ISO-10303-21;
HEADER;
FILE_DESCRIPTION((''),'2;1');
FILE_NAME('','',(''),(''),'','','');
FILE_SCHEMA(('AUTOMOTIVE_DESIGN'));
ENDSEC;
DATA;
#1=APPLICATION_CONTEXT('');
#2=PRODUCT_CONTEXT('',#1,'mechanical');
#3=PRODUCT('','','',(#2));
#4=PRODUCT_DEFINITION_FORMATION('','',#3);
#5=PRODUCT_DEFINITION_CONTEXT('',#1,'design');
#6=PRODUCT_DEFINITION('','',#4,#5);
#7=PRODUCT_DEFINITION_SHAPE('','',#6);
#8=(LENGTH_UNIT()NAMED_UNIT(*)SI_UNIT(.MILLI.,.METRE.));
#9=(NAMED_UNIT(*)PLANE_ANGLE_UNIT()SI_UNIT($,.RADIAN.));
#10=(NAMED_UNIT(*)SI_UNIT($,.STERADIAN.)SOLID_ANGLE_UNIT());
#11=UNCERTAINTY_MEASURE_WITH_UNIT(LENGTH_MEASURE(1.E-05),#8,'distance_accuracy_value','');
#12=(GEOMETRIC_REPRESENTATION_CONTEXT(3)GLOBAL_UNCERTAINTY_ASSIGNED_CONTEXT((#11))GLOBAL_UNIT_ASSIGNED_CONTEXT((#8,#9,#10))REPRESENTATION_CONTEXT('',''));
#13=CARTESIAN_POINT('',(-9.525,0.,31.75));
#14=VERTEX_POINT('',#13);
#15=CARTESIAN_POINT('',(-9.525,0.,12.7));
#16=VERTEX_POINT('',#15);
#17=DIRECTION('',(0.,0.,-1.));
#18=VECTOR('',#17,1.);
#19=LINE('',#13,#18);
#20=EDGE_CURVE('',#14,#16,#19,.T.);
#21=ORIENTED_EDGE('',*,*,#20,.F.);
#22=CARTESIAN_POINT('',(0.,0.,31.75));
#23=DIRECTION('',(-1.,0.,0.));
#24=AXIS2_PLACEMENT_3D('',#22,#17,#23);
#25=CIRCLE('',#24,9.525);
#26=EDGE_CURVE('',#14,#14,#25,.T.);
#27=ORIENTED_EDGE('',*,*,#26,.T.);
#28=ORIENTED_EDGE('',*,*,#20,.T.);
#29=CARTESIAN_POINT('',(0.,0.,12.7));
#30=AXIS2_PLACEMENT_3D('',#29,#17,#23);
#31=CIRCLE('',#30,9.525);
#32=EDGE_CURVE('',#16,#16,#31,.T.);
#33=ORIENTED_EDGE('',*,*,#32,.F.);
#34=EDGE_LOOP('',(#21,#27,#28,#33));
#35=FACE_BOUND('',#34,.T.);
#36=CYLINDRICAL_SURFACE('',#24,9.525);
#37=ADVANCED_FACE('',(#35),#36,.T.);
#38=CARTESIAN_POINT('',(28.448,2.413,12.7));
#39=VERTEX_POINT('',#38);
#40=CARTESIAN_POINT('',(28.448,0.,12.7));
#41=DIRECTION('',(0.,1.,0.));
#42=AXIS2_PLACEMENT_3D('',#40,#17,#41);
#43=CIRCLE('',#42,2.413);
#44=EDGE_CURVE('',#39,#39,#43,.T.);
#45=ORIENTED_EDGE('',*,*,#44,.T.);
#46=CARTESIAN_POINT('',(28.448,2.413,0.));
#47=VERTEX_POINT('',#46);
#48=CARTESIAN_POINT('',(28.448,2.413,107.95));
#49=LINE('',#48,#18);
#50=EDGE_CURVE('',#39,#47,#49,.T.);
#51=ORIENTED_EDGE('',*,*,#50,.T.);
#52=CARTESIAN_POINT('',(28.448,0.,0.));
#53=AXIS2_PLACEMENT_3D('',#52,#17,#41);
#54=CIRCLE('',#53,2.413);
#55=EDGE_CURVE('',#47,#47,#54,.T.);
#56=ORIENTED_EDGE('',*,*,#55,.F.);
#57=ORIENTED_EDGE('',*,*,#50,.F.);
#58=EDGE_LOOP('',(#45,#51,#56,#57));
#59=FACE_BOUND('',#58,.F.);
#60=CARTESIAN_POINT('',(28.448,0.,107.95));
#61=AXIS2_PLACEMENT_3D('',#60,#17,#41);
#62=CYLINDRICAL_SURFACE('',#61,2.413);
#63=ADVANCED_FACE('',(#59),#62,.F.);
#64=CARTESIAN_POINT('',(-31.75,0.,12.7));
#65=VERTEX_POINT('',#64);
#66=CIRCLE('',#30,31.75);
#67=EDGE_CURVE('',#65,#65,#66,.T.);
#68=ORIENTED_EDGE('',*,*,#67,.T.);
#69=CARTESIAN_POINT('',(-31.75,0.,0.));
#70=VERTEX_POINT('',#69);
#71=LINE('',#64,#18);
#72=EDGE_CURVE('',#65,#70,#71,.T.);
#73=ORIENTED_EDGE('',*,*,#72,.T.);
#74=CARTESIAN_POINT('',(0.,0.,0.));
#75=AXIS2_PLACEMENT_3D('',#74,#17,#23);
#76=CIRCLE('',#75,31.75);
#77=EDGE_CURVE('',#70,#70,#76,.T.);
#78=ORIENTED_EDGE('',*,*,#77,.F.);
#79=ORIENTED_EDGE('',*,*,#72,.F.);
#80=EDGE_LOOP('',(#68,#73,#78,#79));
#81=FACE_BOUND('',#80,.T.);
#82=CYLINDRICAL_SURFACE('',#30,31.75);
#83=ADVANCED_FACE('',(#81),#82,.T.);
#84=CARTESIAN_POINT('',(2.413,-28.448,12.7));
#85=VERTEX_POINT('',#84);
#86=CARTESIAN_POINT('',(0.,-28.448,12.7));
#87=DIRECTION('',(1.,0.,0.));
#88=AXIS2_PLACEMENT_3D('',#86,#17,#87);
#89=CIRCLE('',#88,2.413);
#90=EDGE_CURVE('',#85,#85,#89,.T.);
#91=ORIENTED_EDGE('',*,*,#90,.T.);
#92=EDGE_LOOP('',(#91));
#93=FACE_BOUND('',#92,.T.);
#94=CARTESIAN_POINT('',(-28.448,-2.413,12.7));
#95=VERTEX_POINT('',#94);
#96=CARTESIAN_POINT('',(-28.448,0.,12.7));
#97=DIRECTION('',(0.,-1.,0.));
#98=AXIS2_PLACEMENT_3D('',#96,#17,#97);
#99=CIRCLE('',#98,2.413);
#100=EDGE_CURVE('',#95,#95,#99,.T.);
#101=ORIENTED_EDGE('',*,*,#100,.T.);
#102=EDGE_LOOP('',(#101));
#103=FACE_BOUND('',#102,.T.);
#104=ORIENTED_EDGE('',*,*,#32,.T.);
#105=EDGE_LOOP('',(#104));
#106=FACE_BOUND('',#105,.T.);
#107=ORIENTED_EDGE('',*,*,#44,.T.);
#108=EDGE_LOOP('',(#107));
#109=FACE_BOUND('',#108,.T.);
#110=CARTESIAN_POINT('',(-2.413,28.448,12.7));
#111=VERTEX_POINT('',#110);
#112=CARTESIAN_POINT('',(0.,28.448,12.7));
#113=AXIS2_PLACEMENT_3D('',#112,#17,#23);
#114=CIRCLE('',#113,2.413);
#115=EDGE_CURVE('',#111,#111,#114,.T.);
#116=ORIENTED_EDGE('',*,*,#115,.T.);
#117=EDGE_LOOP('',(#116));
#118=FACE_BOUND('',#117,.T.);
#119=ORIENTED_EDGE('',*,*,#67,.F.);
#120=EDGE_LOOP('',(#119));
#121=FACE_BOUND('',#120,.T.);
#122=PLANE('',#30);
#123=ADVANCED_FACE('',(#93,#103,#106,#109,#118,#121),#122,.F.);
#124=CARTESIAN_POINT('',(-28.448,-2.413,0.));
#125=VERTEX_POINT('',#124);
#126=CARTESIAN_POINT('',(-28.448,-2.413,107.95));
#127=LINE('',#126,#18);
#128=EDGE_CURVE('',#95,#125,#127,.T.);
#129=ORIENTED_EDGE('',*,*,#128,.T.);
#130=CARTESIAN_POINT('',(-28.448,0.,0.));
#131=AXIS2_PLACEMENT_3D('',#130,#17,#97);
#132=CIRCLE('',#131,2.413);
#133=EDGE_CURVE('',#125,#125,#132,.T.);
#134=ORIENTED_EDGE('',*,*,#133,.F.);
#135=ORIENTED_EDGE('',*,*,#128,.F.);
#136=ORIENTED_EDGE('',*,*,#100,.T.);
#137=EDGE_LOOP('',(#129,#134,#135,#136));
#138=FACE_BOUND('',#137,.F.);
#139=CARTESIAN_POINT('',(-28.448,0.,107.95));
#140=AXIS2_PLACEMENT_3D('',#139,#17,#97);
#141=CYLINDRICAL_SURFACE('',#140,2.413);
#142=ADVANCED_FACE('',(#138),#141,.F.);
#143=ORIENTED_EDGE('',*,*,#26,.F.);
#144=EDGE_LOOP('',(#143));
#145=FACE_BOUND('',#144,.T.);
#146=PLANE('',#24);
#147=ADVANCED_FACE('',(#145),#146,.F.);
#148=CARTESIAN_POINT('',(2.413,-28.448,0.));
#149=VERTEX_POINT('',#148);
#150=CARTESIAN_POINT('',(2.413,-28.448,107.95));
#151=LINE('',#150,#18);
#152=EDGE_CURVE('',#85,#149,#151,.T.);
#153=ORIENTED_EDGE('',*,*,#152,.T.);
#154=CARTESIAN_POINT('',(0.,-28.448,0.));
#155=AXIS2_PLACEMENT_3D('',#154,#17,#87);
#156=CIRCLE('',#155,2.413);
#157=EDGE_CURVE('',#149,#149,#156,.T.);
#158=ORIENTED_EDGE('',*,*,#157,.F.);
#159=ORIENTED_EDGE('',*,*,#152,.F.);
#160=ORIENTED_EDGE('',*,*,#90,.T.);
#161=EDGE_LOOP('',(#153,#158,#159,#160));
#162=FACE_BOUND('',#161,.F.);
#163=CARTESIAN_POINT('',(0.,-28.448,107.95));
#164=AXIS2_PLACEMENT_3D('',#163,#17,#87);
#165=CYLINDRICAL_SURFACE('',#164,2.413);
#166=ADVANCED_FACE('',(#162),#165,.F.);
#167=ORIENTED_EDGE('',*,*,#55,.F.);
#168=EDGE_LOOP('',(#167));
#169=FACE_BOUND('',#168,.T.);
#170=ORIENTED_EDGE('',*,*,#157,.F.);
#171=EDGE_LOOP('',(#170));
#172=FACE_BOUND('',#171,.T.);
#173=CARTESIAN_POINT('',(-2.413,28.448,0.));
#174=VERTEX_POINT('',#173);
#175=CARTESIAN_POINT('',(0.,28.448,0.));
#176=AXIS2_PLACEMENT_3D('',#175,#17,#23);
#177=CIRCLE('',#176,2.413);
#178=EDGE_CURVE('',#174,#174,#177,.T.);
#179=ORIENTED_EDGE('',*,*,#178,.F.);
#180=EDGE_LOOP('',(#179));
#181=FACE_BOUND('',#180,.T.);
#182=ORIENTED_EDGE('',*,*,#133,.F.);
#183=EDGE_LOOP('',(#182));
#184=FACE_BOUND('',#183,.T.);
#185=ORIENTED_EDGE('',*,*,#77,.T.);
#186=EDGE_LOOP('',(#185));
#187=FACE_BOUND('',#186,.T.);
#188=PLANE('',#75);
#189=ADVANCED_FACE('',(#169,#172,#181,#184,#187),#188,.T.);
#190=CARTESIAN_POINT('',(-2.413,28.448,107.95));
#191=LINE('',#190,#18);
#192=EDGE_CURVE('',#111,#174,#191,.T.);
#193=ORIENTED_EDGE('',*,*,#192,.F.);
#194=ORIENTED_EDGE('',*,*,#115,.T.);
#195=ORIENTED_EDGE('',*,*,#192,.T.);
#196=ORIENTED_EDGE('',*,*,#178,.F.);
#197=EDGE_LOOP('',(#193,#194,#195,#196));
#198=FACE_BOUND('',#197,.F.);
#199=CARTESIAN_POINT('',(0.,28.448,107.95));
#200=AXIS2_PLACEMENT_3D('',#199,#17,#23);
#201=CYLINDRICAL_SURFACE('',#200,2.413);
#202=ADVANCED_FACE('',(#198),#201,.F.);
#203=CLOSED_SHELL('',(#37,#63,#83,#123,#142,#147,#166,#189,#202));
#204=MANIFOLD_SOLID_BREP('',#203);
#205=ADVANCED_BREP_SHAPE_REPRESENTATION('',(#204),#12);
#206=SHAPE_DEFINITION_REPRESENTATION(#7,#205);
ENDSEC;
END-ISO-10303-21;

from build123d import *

# Parameters (mm, degrees)
F3_D            = 4.826
F3_COPIES_COUNT = 4


# Not quite as in the source:
# - a pattern or mirror of a feature is missing from the dataset's text; its kind, count and spacing are read off the source's solid


with BuildPart() as f1:
    # F0 (on Front) → F1 (revolve)
    with BuildSketch(Plane.XZ):
        Polygon((-31.75, 0), (0, 0), (0, 31.75), (-9.525, 31.75), (-9.525, 12.7), (-31.75, 12.7), align=None)
    revolve(axis=Axis((0, 0, 15.875), (0, 0, -1)))

    # F3 (through all)
    with Locations(Plane.XY.offset(12.7)):
        with Locations((0, 28.448)):
            f3 = Hole(F3_D / 2)

    # F3_copies: F3 ×4 about axis
    f3_copies_axis = Axis((0, 0, 0), (0, 0, 1))
    for i in range(1, F3_COPIES_COUNT):
        add(f3.rotate(f3_copies_axis, i * 360 / F3_COPIES_COUNT), mode=Mode.SUBTRACT)


solid = f1.part
